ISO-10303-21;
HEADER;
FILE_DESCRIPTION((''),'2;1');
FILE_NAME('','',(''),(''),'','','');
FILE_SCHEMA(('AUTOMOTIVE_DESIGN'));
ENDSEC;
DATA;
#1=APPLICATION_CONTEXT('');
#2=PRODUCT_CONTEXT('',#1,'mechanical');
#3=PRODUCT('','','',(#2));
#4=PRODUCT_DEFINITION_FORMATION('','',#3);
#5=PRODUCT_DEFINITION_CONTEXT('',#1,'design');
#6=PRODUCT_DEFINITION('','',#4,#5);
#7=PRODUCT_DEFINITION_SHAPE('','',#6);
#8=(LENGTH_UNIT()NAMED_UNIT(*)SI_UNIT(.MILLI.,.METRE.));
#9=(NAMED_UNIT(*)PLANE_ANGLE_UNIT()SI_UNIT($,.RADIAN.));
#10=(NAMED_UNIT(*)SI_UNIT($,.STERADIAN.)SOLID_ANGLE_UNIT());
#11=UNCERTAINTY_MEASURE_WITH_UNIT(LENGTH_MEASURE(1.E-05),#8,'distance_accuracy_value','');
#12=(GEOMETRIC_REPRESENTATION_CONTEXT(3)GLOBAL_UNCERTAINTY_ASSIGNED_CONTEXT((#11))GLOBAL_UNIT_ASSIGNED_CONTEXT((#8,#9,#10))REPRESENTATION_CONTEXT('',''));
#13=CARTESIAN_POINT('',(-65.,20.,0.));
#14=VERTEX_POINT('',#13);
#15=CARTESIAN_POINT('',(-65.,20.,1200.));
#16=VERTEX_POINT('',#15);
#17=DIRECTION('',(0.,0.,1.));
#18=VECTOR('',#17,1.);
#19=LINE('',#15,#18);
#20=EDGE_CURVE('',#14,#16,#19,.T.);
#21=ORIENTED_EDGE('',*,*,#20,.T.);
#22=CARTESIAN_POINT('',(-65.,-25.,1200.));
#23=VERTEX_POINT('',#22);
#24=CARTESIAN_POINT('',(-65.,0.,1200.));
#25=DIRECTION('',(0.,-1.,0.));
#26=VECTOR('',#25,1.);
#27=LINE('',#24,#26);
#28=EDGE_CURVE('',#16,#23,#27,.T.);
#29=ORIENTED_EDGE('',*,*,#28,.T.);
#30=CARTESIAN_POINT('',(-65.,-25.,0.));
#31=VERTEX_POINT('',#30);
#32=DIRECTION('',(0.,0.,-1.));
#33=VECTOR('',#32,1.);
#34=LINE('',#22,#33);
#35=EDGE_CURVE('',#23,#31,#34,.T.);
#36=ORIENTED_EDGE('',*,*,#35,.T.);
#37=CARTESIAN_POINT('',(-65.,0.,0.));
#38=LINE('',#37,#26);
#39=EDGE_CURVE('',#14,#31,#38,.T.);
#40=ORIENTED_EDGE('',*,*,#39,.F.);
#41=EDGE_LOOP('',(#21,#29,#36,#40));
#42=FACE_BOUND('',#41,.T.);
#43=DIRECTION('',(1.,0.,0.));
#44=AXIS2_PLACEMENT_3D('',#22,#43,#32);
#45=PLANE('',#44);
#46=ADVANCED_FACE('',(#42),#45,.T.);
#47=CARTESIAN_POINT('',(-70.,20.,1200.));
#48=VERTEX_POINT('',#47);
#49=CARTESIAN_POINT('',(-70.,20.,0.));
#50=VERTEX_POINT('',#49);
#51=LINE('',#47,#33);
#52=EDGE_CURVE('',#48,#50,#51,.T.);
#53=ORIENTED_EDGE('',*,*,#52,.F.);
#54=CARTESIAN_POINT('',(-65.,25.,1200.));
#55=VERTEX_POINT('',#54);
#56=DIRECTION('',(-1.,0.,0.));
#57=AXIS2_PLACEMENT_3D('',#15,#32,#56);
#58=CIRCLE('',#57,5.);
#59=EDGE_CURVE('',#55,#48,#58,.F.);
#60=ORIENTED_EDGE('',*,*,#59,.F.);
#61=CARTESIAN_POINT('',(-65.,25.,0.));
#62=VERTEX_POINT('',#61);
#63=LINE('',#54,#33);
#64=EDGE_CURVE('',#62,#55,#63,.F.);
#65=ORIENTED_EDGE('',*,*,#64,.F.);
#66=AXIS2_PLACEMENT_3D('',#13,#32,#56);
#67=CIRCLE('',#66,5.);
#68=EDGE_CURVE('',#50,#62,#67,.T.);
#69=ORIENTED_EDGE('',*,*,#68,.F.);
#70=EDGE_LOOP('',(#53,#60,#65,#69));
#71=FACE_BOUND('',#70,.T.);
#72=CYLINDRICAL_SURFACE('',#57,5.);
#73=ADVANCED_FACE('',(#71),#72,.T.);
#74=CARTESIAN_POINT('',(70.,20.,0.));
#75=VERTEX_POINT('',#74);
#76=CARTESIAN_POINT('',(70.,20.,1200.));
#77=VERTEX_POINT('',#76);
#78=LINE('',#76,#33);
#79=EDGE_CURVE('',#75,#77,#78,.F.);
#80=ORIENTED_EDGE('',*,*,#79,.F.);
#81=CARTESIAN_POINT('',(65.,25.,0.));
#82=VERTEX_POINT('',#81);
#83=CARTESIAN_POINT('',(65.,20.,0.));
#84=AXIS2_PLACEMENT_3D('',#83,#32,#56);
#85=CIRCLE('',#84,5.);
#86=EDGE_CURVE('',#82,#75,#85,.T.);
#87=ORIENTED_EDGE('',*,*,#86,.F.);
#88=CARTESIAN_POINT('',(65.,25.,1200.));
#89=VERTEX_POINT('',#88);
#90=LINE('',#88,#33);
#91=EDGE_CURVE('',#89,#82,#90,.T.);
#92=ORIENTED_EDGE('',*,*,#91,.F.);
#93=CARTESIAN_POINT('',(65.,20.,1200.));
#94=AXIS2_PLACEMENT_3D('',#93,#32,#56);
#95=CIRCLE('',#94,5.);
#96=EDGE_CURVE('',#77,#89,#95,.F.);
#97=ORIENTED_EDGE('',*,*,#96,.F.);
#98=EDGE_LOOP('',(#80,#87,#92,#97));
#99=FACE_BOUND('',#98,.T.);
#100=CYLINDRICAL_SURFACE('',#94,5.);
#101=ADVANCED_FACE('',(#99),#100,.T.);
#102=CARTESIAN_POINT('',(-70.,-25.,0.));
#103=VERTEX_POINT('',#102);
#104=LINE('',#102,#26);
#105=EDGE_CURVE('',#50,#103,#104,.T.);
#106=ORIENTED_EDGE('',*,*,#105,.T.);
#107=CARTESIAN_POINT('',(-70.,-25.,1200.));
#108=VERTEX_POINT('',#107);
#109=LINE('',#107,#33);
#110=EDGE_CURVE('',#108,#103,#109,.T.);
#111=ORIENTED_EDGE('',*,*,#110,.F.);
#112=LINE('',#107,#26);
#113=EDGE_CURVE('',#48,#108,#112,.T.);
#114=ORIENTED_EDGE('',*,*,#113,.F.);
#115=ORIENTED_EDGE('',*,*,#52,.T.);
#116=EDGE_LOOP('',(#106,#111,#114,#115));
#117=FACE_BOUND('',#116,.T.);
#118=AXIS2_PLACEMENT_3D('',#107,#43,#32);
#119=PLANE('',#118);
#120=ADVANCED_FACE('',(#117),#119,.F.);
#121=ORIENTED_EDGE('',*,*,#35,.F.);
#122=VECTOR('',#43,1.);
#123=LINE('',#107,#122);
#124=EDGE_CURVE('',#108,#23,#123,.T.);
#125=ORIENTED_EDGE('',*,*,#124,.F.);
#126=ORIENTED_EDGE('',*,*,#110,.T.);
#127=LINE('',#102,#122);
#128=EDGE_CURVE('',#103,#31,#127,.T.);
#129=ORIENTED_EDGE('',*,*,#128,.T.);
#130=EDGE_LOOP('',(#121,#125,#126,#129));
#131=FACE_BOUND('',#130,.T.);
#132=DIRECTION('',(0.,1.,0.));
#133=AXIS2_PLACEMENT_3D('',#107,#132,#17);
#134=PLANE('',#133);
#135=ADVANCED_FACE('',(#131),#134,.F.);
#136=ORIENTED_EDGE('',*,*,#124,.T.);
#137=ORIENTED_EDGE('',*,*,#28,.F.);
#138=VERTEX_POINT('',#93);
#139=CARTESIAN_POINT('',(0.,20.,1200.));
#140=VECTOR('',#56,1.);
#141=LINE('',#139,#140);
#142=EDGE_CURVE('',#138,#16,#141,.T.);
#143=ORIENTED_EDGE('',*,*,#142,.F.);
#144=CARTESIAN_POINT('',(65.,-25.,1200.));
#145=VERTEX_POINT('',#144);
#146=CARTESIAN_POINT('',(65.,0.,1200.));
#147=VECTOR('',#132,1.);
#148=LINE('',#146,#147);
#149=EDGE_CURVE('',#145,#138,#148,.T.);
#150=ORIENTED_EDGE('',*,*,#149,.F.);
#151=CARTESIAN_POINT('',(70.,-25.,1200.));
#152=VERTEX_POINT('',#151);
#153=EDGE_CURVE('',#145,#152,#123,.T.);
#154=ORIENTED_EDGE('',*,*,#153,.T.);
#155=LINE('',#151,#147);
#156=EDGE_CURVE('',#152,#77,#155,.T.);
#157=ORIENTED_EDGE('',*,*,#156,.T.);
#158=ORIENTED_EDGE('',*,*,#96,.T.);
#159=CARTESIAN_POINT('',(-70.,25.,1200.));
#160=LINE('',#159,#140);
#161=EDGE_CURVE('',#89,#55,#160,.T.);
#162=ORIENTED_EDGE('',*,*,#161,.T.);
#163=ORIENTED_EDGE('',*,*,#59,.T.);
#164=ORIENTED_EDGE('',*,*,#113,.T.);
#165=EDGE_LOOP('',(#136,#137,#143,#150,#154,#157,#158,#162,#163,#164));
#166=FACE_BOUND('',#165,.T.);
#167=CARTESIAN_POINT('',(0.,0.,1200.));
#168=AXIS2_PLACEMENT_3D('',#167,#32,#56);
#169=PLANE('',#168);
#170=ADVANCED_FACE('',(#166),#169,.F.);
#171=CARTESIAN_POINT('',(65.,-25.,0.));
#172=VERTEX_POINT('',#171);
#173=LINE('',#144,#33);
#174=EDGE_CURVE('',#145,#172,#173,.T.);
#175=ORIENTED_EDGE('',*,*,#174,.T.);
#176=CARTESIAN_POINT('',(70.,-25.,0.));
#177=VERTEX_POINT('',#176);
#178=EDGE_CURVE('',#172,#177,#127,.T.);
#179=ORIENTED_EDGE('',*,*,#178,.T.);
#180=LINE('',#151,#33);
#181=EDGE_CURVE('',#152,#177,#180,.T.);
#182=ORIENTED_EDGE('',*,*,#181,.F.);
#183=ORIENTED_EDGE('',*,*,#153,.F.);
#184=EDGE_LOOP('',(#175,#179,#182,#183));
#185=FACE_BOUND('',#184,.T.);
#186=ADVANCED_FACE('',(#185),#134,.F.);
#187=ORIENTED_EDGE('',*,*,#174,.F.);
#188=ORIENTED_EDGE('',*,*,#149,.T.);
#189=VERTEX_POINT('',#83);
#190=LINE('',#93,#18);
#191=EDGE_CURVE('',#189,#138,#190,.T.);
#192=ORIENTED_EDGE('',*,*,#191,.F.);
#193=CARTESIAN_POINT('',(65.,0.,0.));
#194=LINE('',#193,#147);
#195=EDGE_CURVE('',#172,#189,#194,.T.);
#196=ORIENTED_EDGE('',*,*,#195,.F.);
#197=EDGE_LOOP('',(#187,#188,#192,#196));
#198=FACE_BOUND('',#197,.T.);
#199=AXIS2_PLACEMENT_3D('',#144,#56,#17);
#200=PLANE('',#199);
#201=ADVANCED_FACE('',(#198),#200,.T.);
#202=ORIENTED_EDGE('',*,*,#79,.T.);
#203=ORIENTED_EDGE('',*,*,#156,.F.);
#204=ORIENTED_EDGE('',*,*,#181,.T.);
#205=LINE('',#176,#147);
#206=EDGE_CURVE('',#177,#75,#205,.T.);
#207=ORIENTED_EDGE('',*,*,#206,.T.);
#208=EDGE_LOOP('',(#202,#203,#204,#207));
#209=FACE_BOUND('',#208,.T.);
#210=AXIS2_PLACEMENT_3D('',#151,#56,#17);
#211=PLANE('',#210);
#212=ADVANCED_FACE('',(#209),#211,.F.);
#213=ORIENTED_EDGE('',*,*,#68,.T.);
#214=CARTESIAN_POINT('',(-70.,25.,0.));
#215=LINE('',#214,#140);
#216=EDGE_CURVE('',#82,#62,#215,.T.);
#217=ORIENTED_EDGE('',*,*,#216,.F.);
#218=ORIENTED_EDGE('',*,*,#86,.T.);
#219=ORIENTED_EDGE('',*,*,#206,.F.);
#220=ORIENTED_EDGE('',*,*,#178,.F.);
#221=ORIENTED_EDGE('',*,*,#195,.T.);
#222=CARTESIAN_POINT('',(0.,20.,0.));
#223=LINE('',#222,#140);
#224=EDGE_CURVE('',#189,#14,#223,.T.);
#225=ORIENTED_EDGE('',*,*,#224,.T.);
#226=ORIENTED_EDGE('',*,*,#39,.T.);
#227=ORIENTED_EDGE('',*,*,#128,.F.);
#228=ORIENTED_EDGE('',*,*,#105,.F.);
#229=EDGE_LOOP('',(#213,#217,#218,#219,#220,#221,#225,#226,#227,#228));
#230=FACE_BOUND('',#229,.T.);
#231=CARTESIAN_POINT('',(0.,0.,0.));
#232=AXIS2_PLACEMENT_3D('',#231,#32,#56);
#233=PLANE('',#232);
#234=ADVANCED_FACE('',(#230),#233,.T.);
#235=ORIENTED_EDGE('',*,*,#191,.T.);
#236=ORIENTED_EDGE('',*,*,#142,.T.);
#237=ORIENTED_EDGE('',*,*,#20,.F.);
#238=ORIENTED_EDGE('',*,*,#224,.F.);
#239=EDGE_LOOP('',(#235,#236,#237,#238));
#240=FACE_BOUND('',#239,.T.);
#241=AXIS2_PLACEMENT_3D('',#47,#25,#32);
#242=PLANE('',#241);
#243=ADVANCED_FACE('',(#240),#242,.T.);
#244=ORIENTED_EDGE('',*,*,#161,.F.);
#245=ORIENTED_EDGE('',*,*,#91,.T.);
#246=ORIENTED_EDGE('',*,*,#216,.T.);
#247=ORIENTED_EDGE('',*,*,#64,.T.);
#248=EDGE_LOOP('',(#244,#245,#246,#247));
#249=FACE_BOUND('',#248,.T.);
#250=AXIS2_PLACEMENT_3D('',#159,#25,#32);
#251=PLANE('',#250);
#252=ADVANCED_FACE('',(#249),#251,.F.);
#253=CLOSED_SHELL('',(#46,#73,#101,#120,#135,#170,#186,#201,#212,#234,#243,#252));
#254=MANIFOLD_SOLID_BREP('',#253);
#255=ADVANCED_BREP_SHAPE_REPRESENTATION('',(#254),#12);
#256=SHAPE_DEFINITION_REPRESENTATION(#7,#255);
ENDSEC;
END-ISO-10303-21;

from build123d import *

# Parameters (mm, degrees)
ESBO_O1_W                = 140
ESBO_O1_H                = 50
RESSALTO_EXTRUS_O1_DEPTH = 1200
FILETE1_R                = 5
CASCA1_START             = -65
CASCA1_OUTLINE_W         = 45
CASCA1_OUTLINE_H         = 1200
CASCA1_DEPTH             = 130


# Read off the part's stored shape, not the designer's step: Casca1
with BuildPart() as part:
    # Esboço1 → Ressalto-extrusão1 (new body)
    with BuildSketch(Plane.XY):
        Rectangle(ESBO_O1_W, ESBO_O1_H)
    extrude(amount=RESSALTO_EXTRUS_O1_DEPTH)

    # Filete1
    filete1_edges = [part.edges().sort_by_distance(p)[0] for p in [
        (-70, 25, 600),
        (70, 25, 600),
    ]]
    fillet(filete1_edges, radius=FILETE1_R)

    # Casca1 outline → Casca1 (cut)
    with BuildSketch(Plane.YZ.offset(CASCA1_START)):
        with Locations((-2.5, 600)):
            Rectangle(CASCA1_OUTLINE_W, CASCA1_OUTLINE_H)
    extrude(amount=CASCA1_DEPTH, mode=Mode.SUBTRACT)


solid = part.part
